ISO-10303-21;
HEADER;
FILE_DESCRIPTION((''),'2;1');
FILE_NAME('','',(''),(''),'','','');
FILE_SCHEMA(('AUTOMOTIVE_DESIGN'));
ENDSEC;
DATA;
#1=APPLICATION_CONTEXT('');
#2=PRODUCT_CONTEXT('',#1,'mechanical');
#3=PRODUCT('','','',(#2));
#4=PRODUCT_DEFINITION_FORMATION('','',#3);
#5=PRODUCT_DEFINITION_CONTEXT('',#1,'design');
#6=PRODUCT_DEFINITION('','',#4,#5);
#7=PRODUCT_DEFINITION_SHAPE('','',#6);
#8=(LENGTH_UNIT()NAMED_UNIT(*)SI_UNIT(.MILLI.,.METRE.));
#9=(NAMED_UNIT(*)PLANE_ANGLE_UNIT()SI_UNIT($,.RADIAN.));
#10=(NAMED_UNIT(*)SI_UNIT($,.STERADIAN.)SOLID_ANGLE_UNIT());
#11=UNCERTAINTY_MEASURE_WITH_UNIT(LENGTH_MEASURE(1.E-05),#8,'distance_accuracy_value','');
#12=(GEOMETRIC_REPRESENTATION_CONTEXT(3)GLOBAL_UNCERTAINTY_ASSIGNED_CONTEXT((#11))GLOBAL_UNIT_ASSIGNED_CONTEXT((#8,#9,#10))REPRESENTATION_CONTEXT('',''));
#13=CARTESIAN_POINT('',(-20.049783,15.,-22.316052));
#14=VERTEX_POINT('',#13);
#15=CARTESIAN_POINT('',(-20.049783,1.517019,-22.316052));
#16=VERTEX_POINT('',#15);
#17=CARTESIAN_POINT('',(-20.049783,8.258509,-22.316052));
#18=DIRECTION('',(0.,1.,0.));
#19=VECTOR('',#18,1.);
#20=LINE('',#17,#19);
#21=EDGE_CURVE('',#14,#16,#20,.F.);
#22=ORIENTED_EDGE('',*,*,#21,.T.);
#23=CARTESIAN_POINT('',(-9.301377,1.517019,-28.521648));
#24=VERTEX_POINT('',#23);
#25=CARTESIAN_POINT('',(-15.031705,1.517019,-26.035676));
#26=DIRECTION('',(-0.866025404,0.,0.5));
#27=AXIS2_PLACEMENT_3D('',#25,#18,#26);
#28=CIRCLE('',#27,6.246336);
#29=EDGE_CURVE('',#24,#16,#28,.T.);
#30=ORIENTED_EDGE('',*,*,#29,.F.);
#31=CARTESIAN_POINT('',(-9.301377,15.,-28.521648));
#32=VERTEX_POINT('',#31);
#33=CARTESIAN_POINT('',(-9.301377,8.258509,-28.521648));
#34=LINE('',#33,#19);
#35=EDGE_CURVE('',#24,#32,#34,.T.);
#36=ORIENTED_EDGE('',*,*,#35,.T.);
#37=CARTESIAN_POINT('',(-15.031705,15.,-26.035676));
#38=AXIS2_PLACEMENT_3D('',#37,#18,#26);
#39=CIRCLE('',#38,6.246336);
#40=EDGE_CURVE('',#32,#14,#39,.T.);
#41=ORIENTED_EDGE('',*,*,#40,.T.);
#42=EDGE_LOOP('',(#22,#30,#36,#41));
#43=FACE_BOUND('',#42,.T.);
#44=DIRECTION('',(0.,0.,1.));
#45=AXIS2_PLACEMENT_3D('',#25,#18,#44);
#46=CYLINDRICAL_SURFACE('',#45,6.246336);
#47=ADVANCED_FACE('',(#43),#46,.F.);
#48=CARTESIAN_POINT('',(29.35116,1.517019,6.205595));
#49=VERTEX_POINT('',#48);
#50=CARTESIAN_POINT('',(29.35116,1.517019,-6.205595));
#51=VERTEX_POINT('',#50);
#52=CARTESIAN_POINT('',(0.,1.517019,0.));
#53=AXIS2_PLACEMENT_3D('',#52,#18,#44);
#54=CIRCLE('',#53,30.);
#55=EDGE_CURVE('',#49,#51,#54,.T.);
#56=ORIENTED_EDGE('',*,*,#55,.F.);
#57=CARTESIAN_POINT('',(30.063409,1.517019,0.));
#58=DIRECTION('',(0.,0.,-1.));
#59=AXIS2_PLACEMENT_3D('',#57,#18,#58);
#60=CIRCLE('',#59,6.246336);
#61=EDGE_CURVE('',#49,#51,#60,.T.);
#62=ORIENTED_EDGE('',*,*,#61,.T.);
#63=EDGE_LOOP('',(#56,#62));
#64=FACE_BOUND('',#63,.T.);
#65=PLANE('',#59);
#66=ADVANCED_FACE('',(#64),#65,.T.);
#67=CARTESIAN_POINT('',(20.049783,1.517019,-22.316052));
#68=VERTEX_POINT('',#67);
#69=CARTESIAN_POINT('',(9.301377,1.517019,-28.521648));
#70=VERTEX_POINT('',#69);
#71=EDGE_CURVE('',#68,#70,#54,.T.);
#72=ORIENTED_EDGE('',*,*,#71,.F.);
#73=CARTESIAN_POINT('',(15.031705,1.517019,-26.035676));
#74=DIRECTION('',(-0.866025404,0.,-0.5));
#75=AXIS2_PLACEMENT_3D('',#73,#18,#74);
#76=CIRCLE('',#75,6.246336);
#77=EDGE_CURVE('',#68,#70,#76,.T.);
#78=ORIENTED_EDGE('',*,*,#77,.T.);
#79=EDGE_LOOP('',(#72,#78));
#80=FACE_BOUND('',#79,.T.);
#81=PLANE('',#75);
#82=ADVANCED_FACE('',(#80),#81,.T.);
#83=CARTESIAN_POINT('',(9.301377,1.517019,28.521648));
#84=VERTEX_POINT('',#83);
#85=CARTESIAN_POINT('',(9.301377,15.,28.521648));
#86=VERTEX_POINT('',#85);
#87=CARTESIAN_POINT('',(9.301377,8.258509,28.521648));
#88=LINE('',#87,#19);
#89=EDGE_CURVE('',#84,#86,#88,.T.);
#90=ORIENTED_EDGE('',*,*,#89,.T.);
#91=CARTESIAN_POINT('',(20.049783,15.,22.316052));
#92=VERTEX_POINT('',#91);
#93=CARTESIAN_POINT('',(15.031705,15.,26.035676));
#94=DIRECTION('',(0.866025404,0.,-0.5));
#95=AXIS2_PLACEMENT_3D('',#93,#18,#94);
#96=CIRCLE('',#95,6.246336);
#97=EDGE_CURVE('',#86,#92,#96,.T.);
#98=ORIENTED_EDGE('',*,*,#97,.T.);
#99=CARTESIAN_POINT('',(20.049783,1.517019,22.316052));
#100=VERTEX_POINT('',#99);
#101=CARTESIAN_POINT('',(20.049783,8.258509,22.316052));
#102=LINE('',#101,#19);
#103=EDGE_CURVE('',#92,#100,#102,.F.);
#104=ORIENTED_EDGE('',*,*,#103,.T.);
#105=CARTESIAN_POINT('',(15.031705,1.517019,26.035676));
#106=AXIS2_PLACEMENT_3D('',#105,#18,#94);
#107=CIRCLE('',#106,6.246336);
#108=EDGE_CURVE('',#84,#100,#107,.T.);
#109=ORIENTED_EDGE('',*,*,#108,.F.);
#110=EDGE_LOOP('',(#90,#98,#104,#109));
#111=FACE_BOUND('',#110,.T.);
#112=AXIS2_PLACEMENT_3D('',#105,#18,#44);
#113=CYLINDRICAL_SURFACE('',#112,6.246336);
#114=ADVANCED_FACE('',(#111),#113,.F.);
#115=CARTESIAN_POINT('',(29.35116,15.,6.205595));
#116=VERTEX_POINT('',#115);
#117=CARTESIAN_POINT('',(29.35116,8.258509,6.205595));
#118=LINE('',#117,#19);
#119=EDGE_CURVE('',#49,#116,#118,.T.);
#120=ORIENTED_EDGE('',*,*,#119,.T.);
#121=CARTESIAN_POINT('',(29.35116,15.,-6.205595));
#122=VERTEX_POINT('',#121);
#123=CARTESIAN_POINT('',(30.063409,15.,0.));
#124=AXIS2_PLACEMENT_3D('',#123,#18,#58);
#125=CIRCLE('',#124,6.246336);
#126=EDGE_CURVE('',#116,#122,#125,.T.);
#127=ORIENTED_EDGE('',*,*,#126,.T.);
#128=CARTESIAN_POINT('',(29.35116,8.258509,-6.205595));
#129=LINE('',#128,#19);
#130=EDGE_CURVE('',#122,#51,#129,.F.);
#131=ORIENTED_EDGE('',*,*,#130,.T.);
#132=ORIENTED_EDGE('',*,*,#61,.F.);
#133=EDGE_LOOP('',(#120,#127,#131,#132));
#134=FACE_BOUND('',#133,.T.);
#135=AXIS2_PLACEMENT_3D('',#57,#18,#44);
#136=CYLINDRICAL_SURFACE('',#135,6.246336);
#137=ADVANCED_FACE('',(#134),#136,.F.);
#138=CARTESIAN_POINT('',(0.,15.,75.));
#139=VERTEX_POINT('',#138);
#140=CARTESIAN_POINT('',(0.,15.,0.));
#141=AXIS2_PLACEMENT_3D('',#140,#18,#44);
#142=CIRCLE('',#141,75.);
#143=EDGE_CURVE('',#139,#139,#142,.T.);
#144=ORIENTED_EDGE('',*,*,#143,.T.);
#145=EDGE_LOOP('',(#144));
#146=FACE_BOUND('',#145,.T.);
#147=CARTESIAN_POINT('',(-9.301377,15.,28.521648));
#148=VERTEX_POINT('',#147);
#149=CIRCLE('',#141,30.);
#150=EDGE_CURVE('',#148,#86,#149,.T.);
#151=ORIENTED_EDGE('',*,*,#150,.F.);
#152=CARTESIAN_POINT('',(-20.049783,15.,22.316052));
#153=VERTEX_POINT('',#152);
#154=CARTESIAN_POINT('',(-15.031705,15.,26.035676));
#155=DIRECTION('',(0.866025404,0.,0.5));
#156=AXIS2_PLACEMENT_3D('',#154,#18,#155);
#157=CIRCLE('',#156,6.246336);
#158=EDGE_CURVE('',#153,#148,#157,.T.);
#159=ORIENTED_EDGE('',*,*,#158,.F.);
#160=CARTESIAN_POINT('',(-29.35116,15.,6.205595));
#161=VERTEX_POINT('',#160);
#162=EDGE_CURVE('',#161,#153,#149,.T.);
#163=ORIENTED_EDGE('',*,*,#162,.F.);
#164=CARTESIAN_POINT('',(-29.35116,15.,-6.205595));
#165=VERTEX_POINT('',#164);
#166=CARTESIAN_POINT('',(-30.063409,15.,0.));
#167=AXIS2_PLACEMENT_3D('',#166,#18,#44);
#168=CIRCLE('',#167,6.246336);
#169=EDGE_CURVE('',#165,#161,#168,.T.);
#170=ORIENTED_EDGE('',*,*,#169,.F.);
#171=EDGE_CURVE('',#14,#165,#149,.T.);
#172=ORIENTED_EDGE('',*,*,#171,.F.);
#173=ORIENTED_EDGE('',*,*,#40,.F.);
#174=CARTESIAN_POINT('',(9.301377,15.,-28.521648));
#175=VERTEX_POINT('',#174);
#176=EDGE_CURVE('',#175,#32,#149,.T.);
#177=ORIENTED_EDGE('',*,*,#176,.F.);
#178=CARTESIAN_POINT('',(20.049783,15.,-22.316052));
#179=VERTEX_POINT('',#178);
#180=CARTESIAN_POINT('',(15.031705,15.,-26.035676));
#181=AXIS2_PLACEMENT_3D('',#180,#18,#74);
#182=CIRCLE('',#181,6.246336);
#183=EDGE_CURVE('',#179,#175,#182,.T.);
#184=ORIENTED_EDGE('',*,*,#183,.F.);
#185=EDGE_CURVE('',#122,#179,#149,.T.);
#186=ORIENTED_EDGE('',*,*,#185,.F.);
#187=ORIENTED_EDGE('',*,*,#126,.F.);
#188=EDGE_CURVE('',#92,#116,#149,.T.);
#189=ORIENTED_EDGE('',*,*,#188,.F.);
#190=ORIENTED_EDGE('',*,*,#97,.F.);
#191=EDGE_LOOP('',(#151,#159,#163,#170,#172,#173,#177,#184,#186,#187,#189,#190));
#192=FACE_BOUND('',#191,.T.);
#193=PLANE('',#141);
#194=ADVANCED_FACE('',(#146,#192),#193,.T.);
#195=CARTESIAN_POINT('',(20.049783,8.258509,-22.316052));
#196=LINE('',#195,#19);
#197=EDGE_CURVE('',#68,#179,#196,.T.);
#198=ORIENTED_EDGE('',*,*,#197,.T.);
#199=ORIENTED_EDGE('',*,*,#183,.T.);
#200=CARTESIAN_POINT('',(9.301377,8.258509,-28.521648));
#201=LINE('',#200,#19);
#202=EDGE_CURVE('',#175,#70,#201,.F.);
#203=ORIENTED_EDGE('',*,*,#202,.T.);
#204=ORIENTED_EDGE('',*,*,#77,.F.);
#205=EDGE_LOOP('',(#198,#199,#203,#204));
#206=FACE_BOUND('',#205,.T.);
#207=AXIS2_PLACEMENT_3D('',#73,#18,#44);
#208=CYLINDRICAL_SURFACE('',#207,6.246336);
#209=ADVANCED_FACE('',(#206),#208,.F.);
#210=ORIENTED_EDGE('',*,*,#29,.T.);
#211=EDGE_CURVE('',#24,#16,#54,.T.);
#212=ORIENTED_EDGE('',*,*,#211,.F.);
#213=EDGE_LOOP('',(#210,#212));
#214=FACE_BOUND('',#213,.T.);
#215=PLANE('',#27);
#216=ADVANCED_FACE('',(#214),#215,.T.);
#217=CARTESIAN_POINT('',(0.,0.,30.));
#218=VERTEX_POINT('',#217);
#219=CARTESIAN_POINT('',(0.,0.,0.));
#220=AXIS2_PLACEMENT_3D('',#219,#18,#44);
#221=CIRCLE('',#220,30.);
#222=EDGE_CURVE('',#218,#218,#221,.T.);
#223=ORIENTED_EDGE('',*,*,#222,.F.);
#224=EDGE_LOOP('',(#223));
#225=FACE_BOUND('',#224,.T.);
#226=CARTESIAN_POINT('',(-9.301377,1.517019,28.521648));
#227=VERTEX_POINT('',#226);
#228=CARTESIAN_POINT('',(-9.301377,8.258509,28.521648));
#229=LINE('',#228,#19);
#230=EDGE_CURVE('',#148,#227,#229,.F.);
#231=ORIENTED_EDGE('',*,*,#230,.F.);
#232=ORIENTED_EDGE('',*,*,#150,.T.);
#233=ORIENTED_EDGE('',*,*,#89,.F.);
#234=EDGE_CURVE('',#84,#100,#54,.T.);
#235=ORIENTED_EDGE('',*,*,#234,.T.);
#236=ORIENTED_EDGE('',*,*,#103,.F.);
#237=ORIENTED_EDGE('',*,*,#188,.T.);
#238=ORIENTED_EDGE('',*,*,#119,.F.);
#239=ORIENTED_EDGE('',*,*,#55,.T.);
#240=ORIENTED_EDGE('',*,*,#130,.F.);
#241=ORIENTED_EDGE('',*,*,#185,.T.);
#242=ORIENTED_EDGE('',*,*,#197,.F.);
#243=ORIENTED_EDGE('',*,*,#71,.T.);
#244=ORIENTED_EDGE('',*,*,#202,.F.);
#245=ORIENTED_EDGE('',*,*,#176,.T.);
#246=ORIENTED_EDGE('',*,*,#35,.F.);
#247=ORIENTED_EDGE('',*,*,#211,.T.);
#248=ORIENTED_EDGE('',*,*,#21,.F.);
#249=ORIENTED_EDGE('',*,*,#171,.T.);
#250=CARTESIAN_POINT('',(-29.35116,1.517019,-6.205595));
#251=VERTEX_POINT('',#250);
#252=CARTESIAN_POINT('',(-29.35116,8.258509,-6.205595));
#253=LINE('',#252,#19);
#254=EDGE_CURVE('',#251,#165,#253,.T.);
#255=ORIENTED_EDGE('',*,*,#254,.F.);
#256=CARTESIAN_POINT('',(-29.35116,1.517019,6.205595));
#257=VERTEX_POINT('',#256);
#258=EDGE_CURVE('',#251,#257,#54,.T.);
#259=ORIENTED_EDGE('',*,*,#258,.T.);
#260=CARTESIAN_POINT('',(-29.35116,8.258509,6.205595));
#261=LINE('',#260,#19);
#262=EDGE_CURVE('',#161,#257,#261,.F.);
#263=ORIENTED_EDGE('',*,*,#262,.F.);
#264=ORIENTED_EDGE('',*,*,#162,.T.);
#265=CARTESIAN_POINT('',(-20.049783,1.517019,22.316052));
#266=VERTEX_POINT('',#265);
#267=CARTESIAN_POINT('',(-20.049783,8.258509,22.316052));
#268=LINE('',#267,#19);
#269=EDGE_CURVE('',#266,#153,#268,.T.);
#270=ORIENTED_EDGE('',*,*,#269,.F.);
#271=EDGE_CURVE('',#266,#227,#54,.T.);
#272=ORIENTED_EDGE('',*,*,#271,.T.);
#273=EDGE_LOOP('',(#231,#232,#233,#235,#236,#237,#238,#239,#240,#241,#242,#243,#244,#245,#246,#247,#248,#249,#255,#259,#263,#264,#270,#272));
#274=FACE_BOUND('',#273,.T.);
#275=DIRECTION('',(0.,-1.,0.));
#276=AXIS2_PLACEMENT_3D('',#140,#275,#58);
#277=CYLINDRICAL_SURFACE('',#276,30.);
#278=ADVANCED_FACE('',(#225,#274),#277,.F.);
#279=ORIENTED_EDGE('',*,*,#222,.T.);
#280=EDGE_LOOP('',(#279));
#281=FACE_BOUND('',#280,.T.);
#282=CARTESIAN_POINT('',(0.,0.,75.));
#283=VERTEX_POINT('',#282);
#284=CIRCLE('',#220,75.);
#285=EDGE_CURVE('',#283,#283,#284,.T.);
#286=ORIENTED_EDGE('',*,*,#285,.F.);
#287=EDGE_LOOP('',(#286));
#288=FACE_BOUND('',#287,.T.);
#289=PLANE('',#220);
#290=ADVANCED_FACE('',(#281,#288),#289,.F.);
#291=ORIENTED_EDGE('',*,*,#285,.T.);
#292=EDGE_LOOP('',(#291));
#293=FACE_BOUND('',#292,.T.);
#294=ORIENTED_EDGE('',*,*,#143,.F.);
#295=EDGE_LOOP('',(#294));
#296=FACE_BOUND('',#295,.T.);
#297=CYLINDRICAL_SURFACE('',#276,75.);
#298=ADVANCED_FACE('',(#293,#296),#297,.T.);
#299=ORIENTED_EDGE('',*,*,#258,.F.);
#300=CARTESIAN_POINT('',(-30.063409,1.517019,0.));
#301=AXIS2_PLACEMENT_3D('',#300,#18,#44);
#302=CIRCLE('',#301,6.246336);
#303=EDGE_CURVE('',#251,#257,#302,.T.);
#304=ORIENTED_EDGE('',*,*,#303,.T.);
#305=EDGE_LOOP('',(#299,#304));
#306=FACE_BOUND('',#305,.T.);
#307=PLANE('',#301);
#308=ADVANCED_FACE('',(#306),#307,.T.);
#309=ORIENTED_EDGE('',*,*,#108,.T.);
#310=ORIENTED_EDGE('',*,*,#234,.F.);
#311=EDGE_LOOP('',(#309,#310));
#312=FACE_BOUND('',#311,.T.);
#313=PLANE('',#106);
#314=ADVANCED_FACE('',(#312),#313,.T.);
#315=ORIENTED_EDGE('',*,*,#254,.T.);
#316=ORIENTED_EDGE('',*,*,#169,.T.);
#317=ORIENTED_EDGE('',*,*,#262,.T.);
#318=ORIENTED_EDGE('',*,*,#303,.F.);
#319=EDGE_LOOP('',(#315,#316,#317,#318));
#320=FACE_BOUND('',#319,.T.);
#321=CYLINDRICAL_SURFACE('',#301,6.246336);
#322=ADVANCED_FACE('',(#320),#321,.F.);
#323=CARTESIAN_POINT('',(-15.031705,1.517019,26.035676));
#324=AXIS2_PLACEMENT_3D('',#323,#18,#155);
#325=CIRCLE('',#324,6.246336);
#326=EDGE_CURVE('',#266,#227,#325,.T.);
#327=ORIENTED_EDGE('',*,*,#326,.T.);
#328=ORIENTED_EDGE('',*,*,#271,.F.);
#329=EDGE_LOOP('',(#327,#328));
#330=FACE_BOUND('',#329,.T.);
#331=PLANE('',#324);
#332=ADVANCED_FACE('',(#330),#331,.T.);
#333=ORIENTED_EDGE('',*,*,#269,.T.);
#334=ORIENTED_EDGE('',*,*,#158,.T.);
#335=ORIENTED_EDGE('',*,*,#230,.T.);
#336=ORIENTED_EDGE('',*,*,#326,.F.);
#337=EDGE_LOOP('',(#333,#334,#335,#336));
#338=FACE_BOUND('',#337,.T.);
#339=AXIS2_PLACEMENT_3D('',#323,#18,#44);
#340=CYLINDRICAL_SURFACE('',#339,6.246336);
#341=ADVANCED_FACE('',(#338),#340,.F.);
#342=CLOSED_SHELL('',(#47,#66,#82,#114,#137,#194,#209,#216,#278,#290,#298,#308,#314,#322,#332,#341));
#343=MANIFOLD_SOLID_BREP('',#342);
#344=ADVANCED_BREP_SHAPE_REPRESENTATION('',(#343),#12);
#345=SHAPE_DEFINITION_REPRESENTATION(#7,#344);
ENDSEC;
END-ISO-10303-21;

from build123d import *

# Parameters (mm, degrees)
SKETCH1_R           = 75
BOSS_EXTRUDE1_DEPTH = 15
SKETCH2_R           = 30
CUT_EXTRUDE1_DEPTH  = 108.121426428
SKETCH3_R           = 6.246335841
CUT_EXTRUDE2_DEPTH  = 13.482981436
CIRPATTERN1_COUNT   = 6


with BuildPart() as part:
    # Sketch1 → Boss-Extrude1 (new body)
    with BuildSketch(Plane(origin=(0, 0, 0), x_dir=(1, 0, 0), z_dir=(0, 1, 0))):
        Circle(SKETCH1_R)
    extrude(amount=BOSS_EXTRUDE1_DEPTH)

    # Sketch2 → Cut-Extrude1 (cut, through all)
    with BuildSketch(Plane(origin=(0, 0, 0), x_dir=(1, 0, 0), z_dir=(0, 1, 0))):
        Circle(SKETCH2_R)
    extrude(amount=CUT_EXTRUDE1_DEPTH, mode=Mode.SUBTRACT)

    # Sketch3 → Cut-Extrude2 (cut)
    with BuildSketch(Plane(origin=(0, 15, 0), x_dir=(1, 0, 0), z_dir=(0, 1, 0))):
        with Locations((-30.063409109, 0)):
            Circle(SKETCH3_R)
    cut_extrude2 = extrude(amount=-CUT_EXTRUDE2_DEPTH, mode=Mode.SUBTRACT)

    # CirPattern1: Cut-Extrude2 ×6 about axis
    cirpattern1_axis = Axis((0, 0, 0), (0, 1, 0))
    for i in range(1, CIRPATTERN1_COUNT):
        add(cut_extrude2.rotate(cirpattern1_axis, i * 360 / CIRPATTERN1_COUNT), mode=Mode.SUBTRACT)


solid = part.part
